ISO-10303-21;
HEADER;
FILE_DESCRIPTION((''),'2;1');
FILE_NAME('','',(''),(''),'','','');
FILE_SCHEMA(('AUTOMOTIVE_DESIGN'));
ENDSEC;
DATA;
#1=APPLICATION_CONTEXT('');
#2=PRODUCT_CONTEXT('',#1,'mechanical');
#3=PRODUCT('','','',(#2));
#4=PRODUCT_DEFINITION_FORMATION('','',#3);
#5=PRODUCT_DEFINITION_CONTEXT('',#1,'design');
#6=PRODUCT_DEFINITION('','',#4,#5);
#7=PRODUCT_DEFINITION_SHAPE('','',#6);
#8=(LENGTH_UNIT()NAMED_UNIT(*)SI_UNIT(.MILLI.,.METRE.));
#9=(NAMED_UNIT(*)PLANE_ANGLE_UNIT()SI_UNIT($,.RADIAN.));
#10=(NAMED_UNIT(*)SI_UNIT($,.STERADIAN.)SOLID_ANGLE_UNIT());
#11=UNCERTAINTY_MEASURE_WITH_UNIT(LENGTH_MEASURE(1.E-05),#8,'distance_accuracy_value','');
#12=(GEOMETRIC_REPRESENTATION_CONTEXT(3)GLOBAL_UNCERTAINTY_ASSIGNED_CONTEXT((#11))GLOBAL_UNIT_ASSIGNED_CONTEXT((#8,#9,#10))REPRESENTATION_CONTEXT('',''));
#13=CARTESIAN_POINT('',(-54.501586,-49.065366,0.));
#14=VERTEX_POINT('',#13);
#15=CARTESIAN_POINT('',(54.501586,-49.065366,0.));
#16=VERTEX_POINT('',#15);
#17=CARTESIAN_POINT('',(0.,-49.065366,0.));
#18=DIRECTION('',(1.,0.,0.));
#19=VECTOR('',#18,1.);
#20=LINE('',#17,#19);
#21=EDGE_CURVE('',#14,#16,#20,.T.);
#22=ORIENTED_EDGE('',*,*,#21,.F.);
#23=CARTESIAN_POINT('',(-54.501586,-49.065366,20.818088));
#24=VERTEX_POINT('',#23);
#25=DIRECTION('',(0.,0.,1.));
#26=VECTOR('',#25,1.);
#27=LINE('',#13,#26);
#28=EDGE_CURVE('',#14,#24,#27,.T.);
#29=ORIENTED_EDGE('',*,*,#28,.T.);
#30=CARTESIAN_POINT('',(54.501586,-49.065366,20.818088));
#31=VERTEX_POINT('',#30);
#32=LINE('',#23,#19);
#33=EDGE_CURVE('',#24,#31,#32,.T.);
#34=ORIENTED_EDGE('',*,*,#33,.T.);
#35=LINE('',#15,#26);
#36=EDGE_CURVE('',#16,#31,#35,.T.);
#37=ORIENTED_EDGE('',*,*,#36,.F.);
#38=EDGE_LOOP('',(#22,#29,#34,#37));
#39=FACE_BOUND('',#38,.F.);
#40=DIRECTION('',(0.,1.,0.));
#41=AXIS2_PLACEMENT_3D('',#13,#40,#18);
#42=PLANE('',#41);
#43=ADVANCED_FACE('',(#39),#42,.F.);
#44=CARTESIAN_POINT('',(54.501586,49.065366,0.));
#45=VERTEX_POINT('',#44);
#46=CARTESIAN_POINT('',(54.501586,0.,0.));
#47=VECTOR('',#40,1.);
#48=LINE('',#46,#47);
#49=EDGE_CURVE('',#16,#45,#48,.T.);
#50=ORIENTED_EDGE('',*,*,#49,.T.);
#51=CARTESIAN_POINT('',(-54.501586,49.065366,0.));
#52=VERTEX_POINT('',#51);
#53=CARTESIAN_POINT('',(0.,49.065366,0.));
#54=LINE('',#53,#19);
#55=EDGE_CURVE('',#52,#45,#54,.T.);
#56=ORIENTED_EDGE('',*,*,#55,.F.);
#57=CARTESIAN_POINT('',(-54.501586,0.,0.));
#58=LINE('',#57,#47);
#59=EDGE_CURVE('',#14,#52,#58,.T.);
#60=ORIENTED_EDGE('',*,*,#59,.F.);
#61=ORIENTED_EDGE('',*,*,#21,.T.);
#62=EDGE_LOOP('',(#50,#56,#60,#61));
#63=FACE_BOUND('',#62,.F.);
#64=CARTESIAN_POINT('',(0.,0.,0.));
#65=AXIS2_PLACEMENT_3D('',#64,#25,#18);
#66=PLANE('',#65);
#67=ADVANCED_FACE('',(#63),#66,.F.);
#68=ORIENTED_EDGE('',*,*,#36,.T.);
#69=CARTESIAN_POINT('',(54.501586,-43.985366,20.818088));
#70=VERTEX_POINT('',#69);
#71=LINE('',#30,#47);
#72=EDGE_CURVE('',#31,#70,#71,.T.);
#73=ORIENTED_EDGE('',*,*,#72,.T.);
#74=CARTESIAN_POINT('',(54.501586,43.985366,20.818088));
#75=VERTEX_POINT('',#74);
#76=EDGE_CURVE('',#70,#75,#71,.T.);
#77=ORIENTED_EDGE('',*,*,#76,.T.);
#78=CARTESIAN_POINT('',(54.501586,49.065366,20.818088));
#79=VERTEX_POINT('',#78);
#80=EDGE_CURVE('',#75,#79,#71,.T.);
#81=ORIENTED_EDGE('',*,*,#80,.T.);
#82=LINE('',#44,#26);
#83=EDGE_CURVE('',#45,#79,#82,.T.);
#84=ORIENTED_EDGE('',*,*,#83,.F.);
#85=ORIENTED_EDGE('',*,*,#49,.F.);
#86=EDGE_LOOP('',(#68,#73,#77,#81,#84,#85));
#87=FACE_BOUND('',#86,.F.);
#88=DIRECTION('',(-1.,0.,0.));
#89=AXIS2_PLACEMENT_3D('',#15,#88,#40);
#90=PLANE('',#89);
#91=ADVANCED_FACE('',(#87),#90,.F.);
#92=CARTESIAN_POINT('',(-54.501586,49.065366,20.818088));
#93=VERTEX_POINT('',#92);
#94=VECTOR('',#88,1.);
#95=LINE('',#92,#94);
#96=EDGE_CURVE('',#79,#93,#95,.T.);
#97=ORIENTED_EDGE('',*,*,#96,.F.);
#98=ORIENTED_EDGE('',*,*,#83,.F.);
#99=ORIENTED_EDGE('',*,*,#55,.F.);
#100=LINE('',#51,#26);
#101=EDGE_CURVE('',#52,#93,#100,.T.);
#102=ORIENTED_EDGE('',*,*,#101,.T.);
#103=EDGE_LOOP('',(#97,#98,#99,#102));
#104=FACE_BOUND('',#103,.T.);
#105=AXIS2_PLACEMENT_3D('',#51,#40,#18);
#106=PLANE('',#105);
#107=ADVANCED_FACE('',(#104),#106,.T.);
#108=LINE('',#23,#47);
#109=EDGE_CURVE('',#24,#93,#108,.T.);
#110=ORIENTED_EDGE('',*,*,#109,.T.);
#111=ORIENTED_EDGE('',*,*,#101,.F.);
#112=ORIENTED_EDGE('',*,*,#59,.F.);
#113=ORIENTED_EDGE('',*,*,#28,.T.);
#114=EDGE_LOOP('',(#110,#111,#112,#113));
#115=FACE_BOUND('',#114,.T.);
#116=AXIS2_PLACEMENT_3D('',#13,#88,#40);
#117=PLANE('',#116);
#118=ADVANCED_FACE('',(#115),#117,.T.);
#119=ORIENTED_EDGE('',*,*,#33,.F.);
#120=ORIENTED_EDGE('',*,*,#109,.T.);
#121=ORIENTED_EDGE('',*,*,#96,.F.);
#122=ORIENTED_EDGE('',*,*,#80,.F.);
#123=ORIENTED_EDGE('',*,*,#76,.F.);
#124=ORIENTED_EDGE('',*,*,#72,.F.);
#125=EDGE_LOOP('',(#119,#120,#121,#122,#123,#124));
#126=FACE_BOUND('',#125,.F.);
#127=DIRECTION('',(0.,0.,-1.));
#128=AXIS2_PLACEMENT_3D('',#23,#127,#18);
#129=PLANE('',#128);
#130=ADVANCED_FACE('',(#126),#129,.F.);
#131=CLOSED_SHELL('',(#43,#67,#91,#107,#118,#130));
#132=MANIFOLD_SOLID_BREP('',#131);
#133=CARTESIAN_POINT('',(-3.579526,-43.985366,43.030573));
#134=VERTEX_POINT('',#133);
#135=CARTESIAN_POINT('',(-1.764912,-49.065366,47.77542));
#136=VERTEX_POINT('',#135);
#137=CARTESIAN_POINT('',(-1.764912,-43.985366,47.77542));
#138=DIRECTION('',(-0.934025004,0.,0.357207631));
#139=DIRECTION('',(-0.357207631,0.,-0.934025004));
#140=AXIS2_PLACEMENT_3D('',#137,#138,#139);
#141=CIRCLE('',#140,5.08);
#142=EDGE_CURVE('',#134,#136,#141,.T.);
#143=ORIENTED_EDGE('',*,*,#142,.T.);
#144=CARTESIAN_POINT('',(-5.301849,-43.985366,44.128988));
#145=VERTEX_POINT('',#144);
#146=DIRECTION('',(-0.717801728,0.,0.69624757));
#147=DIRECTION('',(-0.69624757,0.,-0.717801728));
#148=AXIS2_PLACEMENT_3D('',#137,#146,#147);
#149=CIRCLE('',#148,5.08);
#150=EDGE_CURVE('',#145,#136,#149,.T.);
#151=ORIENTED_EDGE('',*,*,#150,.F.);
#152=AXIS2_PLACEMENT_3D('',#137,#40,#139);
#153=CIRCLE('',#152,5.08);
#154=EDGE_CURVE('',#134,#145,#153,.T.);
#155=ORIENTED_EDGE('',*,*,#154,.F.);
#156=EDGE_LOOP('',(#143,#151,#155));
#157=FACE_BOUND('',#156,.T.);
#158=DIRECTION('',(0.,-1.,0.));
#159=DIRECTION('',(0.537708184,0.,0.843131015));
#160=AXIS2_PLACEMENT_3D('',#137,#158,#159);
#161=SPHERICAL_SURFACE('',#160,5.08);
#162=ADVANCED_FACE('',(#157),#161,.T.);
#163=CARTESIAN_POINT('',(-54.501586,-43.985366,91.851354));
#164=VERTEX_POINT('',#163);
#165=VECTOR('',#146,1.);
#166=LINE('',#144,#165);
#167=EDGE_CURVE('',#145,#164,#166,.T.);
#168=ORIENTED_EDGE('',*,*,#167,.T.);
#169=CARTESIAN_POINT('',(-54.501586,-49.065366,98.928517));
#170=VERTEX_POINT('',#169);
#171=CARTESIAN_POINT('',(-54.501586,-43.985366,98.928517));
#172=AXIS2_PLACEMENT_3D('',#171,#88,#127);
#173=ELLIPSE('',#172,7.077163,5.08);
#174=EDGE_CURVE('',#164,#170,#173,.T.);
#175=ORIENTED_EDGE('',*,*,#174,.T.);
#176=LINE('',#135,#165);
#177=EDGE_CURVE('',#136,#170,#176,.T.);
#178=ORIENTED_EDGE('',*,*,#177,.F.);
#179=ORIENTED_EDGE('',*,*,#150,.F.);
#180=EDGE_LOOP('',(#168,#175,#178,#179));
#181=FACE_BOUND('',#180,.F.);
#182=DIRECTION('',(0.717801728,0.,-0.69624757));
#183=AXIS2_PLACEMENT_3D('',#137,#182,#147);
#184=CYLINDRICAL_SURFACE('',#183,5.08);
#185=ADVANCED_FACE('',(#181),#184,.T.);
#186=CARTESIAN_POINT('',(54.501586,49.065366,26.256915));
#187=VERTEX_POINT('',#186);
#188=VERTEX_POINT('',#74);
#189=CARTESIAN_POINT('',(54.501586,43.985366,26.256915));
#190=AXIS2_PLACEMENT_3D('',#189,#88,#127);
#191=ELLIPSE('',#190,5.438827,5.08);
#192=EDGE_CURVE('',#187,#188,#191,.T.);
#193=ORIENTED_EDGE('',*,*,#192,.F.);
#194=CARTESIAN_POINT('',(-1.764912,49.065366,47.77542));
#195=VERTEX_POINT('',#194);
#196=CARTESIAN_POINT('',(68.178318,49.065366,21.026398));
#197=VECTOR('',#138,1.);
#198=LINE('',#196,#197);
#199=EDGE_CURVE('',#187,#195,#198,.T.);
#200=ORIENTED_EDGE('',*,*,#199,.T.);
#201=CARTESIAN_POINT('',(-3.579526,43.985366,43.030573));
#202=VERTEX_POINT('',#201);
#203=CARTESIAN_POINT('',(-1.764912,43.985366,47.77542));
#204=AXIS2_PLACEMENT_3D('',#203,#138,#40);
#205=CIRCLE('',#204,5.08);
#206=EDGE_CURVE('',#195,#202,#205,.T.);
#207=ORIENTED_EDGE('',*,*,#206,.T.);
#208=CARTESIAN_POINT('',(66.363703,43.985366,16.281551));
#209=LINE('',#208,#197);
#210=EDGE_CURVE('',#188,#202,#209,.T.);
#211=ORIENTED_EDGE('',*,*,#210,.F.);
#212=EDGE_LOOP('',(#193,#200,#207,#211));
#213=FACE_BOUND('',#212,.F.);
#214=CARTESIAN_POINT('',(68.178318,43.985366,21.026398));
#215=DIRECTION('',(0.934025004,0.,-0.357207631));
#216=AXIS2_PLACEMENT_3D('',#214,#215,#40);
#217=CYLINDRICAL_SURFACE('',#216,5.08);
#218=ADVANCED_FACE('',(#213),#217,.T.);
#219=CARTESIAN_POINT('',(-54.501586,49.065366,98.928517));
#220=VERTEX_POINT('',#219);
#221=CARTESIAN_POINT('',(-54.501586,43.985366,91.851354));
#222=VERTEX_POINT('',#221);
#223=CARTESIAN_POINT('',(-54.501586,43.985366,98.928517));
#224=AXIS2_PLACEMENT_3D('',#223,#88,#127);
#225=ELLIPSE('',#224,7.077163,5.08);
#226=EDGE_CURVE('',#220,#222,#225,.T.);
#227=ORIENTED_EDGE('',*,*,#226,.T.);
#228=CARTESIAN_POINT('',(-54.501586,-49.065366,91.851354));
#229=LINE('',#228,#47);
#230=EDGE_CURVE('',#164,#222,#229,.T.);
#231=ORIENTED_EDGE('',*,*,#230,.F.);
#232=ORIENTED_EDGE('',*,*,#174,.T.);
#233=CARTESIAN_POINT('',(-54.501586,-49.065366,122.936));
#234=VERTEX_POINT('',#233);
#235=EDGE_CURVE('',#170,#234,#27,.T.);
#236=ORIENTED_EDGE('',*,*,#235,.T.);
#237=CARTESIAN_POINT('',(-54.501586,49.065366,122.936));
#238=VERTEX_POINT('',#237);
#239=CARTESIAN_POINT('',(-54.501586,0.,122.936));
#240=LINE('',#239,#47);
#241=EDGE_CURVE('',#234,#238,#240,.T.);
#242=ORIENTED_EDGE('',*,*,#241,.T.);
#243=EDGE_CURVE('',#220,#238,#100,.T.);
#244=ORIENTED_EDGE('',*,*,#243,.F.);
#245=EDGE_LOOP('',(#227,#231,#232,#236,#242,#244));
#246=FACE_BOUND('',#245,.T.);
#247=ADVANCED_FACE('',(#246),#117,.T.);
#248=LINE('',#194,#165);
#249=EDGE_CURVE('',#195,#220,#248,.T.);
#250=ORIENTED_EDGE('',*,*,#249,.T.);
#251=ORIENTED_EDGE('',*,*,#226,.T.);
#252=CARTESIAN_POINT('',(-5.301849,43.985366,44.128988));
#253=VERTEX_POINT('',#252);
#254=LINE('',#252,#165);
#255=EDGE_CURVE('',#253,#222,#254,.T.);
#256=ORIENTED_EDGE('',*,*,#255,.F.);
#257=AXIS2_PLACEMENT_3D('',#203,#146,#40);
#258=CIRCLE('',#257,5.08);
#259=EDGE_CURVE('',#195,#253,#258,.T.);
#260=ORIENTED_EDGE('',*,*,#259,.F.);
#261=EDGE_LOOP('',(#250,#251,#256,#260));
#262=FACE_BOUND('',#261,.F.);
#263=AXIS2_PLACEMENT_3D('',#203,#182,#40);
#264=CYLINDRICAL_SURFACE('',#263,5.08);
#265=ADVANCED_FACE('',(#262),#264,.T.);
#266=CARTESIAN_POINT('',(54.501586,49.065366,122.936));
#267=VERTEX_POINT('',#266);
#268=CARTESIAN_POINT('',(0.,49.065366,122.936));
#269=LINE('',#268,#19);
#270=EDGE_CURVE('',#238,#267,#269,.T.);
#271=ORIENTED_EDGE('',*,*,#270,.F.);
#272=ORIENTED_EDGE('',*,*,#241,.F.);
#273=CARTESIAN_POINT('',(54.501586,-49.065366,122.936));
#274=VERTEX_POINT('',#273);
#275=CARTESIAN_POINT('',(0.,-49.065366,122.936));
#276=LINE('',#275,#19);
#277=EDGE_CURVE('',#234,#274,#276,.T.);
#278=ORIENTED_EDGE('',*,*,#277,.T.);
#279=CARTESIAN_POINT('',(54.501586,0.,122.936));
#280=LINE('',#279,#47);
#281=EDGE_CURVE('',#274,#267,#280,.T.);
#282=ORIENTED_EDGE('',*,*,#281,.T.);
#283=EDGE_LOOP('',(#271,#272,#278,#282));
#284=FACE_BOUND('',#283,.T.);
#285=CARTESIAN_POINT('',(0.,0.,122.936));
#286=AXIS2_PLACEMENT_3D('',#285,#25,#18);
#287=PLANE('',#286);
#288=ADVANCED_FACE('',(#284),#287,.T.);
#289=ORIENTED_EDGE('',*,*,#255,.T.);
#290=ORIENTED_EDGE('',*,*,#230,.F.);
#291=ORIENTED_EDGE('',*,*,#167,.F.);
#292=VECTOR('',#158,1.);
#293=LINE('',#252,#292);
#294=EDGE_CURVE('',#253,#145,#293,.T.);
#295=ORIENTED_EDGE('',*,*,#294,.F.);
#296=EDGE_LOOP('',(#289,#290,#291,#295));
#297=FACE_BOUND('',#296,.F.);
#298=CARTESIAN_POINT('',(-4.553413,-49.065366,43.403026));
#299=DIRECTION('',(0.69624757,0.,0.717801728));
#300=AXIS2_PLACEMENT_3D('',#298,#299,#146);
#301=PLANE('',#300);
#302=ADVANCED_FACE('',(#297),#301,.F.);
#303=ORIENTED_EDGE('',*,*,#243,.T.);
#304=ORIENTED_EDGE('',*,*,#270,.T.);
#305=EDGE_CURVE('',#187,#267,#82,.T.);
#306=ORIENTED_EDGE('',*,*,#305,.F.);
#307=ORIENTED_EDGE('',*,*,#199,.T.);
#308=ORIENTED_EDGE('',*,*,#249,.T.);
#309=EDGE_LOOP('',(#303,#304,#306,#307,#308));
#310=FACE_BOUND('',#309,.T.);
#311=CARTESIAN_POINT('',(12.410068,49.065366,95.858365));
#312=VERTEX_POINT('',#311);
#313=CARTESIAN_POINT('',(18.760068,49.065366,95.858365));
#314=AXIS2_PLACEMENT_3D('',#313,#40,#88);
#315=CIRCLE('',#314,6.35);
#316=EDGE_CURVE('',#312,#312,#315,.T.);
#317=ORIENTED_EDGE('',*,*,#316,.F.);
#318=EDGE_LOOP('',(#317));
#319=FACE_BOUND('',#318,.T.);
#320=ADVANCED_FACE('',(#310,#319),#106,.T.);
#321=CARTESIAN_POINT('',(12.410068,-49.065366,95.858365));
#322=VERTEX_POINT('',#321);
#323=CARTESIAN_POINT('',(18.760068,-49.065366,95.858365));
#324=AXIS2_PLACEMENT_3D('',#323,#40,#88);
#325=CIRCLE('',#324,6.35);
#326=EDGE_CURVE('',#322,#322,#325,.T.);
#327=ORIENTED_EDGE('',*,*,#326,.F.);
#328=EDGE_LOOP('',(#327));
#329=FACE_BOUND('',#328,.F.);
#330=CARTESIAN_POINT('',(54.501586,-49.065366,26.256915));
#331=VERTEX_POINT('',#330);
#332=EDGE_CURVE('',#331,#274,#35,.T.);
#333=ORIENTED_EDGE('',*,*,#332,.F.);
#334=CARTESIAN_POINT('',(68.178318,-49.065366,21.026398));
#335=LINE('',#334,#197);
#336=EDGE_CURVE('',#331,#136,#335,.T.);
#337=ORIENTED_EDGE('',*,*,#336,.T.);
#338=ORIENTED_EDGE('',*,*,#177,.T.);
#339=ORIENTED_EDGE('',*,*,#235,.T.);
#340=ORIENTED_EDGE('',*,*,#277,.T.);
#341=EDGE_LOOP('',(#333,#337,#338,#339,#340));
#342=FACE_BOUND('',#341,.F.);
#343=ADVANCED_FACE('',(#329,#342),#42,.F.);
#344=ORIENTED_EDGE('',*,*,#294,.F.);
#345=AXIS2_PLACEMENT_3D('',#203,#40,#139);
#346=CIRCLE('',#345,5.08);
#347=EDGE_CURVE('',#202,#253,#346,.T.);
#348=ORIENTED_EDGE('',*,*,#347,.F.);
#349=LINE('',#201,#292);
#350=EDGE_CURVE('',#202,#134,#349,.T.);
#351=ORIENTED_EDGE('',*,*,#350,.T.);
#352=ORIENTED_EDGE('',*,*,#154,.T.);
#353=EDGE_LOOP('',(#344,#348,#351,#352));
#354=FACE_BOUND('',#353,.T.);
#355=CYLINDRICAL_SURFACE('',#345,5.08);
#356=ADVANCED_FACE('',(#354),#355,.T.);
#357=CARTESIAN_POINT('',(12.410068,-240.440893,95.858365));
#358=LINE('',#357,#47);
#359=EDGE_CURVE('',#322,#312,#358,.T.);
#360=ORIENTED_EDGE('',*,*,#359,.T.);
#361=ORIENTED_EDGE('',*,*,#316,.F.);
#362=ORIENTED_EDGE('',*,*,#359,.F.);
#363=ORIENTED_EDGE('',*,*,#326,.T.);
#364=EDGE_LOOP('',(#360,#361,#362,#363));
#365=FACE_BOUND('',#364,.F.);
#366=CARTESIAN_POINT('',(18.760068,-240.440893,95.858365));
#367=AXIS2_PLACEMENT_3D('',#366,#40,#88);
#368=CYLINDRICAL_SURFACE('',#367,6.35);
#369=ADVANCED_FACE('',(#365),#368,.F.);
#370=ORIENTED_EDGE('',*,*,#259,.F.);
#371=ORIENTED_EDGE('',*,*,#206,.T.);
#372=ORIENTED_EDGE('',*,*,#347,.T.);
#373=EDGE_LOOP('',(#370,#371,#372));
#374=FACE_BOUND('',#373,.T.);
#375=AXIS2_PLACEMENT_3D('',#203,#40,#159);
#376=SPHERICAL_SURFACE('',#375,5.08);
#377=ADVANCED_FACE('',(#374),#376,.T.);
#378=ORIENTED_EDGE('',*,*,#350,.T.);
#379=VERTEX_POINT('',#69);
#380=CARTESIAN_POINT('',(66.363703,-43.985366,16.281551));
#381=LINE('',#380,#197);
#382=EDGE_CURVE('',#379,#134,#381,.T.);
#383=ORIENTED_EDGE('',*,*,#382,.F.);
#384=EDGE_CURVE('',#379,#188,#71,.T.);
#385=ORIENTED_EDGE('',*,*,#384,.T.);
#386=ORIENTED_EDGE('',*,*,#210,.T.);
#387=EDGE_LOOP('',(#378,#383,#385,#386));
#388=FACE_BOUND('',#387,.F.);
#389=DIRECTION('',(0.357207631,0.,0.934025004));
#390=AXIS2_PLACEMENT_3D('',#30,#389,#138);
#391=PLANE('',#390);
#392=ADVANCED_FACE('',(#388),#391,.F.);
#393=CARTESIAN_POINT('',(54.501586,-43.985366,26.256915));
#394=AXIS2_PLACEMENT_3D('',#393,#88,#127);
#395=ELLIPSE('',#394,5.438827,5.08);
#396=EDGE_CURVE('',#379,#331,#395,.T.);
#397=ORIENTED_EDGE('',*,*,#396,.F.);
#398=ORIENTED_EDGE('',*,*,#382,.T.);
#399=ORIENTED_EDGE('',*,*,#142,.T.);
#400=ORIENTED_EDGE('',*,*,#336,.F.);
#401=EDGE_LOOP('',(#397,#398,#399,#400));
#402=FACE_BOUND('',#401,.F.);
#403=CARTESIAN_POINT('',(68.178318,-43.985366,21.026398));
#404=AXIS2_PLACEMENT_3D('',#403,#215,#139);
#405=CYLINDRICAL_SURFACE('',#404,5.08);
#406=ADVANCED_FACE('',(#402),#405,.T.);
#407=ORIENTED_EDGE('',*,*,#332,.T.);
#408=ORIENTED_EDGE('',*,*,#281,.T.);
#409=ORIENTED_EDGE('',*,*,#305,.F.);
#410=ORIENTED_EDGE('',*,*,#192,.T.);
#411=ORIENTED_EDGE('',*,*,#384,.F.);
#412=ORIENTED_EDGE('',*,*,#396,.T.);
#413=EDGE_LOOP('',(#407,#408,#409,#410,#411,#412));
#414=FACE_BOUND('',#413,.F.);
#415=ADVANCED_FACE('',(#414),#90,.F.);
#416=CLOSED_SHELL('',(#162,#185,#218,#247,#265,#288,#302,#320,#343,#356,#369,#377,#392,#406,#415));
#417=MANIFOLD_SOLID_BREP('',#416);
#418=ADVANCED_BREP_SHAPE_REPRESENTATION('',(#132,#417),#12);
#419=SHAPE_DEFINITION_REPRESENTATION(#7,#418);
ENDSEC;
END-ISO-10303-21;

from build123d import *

# Parameters (mm, degrees)
F0_W         = 109.0031713247
F0_H         = 98.1307327747
F1_DEPTH     = 122.936
F3_DEPTH     = 228.6
F4_T1_DEPTH  = 81.2422372146
F4_T3_DEPTH  = 74.8836801522
F4_T5_DEPTH  = 87.9707327747
F4_T10_DEPTH = 5.08
F4_T16_DEPTH = 5.08
F6_D         = 12.7


# Not quite as in the source:
# - a fillet or chamfer that OpenCascade refuses, or shapes differently, is made with other operations: its cross-section is extruded or revolved along the edge and cut away or added


with BuildPart() as f1:
    # F0 (on Top) → F1 (new body)
    with BuildSketch(Plane.XY):
        Rectangle(F0_W, F0_H)
    extrude(amount=F1_DEPTH)

    # F2 (on face) → F3 (cut)
    with BuildSketch(Plane.XZ.offset(49.0653663874)):
        Polygon((-4.5534134842, 43.4030257165), (-54.5015856624, 91.8513536453), (-54.5015856624, 20.8180882037), (54.5015856624, 20.8180882037), align=None)
    extrude(amount=-F3_DEPTH, mode=Mode.SUBTRACT)

    # F4: fillet of radius 5.08 on 5 edges, made by hand

    # F4_s2 → F4_t1 (cut)
    with BuildSketch(Plane(origin=(-24.7859642555, 0, 24.0416910552), x_dir=(0, 1, 0), z_dir=(-0.7178017282, 0, 0.6962475702))):
        with BuildLine():
            ThreePointArc((49.0653663874, -33.0644637933), (47.5774688358, -29.4723613449), (43.9853663874, -27.9844637933))
            Line((43.9853663874, -27.9844637933), (49.0653663874, -27.9844637933))
            Line((49.0653663874, -27.9844637933), (49.0653663874, -33.0644637933))
        make_face()
        with BuildLine():
            ThreePointArc((-43.9853663874, -27.9844637933), (-47.5774688358, -29.4723613449), (-49.0653663874, -33.0644637933))
            Line((-49.0653663874, -33.0644637933), (-49.0653663874, -27.9844637933))
            Line((-49.0653663874, -27.9844637933), (-43.9853663874, -27.9844637933))
        make_face()
    extrude(amount=F4_T1_DEPTH, mode=Mode.SUBTRACT)

    # F4_s4 → F4_t3 (cut)
    with BuildSketch(Plane(origin=(52.4636836536, 0, -20.0641611063), x_dir=(0, 1, 0), z_dir=(-0.9340250041, 0, 0.3572076311))):
        with BuildLine():
            ThreePointArc((49.0653663874, -43.9929972277), (47.5774688358, -40.4008947793), (43.9853663874, -38.9129972277))
            Line((43.9853663874, -38.9129972277), (49.0653663874, -38.9129972277))
            Line((49.0653663874, -38.9129972277), (49.0653663874, -43.9929972277))
        make_face()
        with BuildLine():
            ThreePointArc((-43.9853663874, -38.9129972277), (-47.5774688358, -40.4008947793), (-49.0653663874, -43.9929972277))
            Line((-49.0653663874, -43.9929972277), (-49.0653663874, -38.9129972277))
            Line((-49.0653663874, -38.9129972277), (-43.9853663874, -38.9129972277))
        make_face()
    extrude(amount=F4_T3_DEPTH, mode=Mode.SUBTRACT)

    # F4_s6 → F4_t5 (cut)
    with BuildSketch(Plane.XZ.offset(-43.9853663874)):
        with BuildLine():
            ThreePointArc((-3.5795264455, 43.0305732869), (-4.4964692561, 43.4923147515), (-5.3018493359, 44.1289875285))
            Line((-5.3018493359, 44.1289875285), (-4.5534134842, 43.4030257165))
            Line((-4.5534134842, 43.4030257165), (-3.5795264455, 43.0305732869))
        make_face()
    extrude(amount=F4_T5_DEPTH, mode=Mode.SUBTRACT)


with BuildPart() as f4_tool8:
    # F4_s9 → F4_t10 (new body)
    with BuildSketch(Plane.XZ.offset(-43.9853663874)):
        Polygon((-1.7649116793, 47.7754203077), (-3.5795264455, 43.0305732869), (-4.5534134842, 43.4030257165), (-5.3018493359, 44.1289875285), align=None)
    extrude(amount=-F4_T10_DEPTH)

    # F4_s11 → F4_t12 (revolve, cut)
    with BuildSketch(Plane(origin=(-1.7649116793, 43.9853663874, 47.7754203077), x_dir=(0.5377081844, 0, 0.843131015), z_dir=(-0.843131015, 0, 0.5377081844))):
        with BuildLine():
            ThreePointArc((0, -5.08), (5.08, 0), (0, 5.08))
            Line((0, 5.08), (0, -5.08))
        make_face()
    revolve(axis=Axis((-1.7649116793, 43.9853663874, 47.7754203077), (0, 1, 0)), mode=Mode.SUBTRACT)


with BuildPart() as f1_1:
    add(f1.part)

    # F4_t7: cut F4_tool8
    add(f4_tool8.part, mode=Mode.SUBTRACT)


with BuildPart() as f4_tool14:
    # F4_s15 → F4_t16 (new body)
    with BuildSketch(Plane.XZ.offset(43.9853663874)):
        Polygon((-1.7649116793, 47.7754203077), (-3.5795264455, 43.0305732869), (-4.5534134842, 43.4030257165), (-5.3018493359, 44.1289875285), align=None)
    extrude(amount=F4_T16_DEPTH)

    # F4_s17 → F4_t18 (revolve, cut)
    with BuildSketch(Plane(origin=(-1.7649116793, -43.9853663874, 47.7754203077), x_dir=(0.5377081844, 0, 0.843131015), z_dir=(0.843131015, 0, -0.5377081844))):
        with BuildLine():
            ThreePointArc((0, -5.08), (5.08, 0), (0, 5.08))
            Line((0, 5.08), (0, -5.08))
        make_face()
    revolve(axis=Axis((-1.7649116793, -43.9853663874, 47.7754203077), (0, -1, 0)), mode=Mode.SUBTRACT)


with BuildPart() as f1_2:
    add(f1_1.part)

    # F4_t13: cut F4_tool14
    add(f4_tool14.part, mode=Mode.SUBTRACT)

    # F6 (through all)
    with Locations(Plane.XZ.offset(49.0653663874)):
        with Locations((18.7600683421, 95.8583652973)):
            Hole(F6_D / 2)


solid = f1_2.part
